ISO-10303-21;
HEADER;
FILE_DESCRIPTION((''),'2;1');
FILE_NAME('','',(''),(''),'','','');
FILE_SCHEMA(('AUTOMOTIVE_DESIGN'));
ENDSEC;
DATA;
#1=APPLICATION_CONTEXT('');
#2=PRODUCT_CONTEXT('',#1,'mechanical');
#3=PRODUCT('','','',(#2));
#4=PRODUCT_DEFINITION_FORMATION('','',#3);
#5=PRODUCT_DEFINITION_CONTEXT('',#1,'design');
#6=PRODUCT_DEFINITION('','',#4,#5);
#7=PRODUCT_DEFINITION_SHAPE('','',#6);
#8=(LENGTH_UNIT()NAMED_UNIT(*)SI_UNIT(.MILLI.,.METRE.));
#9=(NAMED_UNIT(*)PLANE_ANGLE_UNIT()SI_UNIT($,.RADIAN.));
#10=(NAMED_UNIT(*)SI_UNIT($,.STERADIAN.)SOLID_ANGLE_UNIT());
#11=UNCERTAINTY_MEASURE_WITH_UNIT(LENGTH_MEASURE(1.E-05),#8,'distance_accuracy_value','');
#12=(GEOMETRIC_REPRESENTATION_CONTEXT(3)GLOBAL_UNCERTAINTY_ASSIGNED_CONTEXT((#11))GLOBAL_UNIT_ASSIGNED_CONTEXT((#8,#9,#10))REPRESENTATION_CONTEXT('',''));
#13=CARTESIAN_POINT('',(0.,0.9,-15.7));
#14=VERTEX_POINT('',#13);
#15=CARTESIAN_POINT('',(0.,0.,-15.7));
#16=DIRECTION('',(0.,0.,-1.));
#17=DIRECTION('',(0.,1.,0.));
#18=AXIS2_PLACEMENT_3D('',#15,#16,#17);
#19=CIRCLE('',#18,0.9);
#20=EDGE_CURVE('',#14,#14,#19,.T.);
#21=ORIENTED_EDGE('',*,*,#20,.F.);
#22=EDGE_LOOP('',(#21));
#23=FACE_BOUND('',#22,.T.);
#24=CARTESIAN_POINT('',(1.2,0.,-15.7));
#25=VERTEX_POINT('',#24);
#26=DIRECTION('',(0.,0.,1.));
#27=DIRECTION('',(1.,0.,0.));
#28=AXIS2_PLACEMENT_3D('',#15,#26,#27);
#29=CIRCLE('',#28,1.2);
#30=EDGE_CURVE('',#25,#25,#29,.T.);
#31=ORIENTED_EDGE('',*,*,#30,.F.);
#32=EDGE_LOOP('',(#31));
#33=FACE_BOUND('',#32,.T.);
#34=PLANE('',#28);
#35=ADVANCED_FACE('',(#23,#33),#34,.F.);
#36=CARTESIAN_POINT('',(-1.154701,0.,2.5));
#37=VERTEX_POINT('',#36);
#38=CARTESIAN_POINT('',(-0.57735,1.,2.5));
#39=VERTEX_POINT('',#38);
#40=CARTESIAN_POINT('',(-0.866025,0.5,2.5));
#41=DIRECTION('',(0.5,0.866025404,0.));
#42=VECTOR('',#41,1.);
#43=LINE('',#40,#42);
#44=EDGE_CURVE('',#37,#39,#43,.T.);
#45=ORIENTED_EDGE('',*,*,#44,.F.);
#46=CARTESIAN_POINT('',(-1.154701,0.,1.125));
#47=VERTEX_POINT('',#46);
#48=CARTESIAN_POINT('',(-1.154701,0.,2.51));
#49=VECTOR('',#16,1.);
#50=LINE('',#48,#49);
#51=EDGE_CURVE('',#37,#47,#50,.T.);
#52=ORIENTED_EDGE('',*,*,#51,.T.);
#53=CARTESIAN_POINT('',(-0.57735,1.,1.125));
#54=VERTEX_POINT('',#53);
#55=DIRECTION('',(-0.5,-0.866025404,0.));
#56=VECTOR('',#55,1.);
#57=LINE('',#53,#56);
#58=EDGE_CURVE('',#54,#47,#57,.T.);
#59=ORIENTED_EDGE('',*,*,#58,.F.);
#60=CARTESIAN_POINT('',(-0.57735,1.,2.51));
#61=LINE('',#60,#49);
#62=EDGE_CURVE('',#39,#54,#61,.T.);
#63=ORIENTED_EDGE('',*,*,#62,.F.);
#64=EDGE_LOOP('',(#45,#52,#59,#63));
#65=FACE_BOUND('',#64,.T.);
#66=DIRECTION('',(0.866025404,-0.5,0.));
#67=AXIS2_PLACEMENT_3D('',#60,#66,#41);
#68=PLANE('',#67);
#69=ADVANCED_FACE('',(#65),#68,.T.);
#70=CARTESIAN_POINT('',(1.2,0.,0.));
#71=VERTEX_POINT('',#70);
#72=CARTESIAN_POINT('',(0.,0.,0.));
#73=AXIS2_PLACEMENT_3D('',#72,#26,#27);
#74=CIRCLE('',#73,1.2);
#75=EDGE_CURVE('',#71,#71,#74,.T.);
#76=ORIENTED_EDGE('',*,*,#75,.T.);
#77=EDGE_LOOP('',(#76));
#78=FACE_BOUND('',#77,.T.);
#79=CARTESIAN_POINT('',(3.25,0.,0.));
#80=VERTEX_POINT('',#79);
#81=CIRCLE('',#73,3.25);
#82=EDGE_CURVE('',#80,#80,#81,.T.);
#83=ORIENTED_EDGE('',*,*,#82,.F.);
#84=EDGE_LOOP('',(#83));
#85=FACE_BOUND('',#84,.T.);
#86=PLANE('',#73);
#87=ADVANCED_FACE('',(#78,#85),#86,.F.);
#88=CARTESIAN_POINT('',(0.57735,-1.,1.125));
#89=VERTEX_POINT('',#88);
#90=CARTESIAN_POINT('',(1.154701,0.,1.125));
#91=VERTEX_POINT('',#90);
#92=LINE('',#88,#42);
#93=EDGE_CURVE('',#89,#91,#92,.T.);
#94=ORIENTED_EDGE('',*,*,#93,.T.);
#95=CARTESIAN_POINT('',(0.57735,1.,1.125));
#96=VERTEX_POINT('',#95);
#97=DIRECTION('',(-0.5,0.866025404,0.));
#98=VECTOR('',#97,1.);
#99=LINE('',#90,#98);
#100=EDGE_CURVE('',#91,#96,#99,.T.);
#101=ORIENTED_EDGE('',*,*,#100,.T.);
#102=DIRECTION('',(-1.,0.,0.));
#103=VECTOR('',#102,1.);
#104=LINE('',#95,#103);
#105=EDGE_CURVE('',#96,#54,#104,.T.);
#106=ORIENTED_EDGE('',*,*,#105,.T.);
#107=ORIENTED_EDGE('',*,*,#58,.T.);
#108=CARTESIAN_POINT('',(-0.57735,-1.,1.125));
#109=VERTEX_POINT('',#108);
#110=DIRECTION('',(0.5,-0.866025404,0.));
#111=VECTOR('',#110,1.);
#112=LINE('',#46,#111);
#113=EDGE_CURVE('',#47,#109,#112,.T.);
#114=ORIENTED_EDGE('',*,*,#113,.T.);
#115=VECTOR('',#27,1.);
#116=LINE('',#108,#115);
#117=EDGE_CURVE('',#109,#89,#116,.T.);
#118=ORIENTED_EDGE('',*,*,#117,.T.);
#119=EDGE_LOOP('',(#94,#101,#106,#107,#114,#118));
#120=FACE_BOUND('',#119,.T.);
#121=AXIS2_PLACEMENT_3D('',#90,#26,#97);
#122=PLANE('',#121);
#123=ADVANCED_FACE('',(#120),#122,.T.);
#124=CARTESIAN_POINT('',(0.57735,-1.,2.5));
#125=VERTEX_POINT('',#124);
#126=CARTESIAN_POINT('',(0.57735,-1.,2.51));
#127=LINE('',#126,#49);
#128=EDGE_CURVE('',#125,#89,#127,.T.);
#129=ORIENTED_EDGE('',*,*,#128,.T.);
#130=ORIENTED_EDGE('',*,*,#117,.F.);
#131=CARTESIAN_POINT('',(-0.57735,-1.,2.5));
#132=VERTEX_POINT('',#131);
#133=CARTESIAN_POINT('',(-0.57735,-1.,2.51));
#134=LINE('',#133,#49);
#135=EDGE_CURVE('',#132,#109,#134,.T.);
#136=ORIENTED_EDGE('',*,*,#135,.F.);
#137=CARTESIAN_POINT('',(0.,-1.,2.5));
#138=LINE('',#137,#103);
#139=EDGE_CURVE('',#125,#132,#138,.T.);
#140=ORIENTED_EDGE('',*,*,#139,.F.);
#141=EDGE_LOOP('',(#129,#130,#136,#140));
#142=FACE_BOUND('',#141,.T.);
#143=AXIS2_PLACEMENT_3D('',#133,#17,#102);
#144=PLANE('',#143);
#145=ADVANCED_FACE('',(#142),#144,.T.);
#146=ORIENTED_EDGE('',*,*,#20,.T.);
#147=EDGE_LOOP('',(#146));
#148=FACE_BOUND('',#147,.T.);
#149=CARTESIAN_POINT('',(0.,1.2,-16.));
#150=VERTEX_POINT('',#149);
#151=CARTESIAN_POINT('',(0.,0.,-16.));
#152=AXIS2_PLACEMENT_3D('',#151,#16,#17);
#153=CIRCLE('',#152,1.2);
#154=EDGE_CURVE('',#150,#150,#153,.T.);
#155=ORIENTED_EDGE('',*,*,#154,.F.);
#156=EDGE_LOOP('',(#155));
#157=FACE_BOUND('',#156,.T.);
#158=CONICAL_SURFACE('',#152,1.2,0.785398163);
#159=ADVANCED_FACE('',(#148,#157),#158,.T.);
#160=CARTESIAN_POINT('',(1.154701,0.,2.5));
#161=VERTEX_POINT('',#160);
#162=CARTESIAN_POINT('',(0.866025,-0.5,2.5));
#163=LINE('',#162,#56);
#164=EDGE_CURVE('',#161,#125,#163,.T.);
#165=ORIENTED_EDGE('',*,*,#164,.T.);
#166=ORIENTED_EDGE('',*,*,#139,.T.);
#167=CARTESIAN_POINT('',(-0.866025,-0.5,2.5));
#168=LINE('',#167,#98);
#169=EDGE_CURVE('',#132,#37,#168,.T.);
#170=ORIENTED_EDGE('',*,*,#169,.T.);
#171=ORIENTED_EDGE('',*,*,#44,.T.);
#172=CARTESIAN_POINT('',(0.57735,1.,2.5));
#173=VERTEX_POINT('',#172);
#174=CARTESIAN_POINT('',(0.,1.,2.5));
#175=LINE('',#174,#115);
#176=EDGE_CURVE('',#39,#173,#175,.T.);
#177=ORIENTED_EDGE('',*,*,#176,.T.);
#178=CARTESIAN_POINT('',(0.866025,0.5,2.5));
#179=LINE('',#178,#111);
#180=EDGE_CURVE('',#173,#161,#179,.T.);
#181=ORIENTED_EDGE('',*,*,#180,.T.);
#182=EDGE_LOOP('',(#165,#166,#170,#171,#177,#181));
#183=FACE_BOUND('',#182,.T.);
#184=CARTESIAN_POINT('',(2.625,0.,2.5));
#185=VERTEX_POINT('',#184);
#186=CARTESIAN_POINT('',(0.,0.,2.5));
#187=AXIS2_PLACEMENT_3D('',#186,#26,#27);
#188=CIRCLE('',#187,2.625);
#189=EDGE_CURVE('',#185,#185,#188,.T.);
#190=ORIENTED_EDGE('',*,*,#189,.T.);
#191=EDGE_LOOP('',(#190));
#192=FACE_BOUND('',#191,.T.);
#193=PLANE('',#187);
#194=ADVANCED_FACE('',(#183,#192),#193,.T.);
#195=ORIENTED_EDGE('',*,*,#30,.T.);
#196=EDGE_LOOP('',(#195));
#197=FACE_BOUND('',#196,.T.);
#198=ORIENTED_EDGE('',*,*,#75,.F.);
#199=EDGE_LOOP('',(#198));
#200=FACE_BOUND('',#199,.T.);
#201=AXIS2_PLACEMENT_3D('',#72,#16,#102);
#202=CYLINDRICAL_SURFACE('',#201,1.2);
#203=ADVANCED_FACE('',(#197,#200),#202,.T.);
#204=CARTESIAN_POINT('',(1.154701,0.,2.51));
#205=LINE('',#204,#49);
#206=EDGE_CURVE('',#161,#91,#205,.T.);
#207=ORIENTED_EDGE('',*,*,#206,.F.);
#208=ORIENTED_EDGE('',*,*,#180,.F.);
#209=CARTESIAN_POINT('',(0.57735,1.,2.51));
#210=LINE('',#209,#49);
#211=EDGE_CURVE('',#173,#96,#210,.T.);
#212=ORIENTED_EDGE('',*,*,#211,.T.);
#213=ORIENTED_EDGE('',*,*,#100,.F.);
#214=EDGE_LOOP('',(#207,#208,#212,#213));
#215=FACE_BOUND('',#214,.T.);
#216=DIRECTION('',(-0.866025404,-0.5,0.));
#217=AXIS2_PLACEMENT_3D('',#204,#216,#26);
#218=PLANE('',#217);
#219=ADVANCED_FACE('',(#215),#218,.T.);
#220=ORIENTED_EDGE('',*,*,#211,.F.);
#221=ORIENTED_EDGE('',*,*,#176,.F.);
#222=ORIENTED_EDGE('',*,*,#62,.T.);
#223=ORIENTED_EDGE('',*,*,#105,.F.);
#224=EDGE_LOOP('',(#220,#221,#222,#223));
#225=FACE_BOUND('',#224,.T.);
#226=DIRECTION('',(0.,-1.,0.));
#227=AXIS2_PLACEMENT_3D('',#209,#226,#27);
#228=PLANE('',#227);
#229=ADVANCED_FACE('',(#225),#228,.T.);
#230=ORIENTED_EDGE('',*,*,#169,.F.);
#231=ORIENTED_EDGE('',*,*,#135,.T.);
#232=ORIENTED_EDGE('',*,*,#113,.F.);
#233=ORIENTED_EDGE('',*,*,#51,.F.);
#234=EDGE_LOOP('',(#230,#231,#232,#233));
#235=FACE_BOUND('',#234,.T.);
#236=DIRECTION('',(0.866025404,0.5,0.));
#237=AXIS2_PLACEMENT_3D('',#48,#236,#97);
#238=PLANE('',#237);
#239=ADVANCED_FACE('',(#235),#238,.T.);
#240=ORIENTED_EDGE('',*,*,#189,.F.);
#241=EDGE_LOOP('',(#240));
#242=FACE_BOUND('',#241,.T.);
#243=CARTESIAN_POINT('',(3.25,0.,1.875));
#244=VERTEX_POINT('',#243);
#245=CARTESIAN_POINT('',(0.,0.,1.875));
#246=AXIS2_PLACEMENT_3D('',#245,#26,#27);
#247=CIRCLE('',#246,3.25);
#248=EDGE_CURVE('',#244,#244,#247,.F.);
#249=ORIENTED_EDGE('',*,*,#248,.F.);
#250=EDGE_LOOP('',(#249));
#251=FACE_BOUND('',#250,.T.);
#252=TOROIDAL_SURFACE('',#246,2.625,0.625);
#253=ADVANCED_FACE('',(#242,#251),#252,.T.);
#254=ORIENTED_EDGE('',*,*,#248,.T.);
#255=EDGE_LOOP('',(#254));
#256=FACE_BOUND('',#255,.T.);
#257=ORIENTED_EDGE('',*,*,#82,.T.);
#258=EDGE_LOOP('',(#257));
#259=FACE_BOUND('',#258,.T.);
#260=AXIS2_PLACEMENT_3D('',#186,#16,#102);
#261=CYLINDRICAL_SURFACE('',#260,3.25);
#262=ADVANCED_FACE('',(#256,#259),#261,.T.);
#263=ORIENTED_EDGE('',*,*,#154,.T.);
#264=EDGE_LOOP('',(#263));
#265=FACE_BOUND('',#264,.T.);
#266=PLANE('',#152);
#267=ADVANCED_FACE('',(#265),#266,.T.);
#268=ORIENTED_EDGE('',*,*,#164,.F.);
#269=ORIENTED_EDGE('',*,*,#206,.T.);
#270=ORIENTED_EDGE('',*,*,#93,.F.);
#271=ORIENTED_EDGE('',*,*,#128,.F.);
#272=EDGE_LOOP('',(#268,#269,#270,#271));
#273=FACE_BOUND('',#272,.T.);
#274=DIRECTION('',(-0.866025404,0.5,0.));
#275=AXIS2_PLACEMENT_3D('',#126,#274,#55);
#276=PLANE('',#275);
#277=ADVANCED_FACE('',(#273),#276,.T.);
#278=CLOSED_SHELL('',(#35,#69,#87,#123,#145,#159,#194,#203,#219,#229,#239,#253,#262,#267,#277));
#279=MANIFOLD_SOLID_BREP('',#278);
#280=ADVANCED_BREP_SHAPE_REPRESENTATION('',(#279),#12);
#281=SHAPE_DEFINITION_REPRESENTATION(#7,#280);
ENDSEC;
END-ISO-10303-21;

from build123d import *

# Parameters (mm, degrees)
F_0060_CYLINDER_SKETCH_R    = 3.25
F_0060_CYLINDER_DEPTH       = 2.5
F_0061_FILLET_R             = 0.625
F_0062_EXTRUDE_DEPTH        = 1.385
F_0062_EXTRUDE_ROTATE_ANGLE = 120
F_0065_CYLINDER_SKETCH_R    = 1.2
F_0065_CYLINDER_DEPTH       = 15.7
F_0066_CONE_ROTATE_ANGLE    = 90


with BuildPart() as part:
    # 0060_cylinder_Sketch → 0060_cylinder (new body)
    with BuildSketch(Plane.XY):
        Circle(F_0060_CYLINDER_SKETCH_R)
    extrude(amount=F_0060_CYLINDER_DEPTH)

    # 0061_fillet
    f_0061_fillet_edges = [part.edges().sort_by_distance(p)[0] for p in [
        (-3.25, 0, 2.5),
    ]]
    fillet(f_0061_fillet_edges, radius=F_0061_FILLET_R)


with BuildPart() as body_2:
    # 0062_extrude_Sketch → 0062_extrude (new body)
    with BuildSketch(Plane.XY):
        Polygon((0, 0), (1.154700538, 0), (1.732050808, 1), (1.154700538, 2), (0, 2), (-0.577350269, 1), align=None)
    extrude(amount=F_0062_EXTRUDE_DEPTH)


with BuildPart() as body_2_1:
    # 0062_extrude_Rotate: read off the stored shape, not the designer's step
    # 0062_extrude_Rotate: moved
    add(body_2.part.rotate(Axis((0, 0, 0), (0, 0, 1)), F_0062_EXTRUDE_ROTATE_ANGLE))


with BuildPart() as body_2_2:
    # 0062_extrude_Translate: moved
    add(body_2_1.part.moved(Location((1.154700538, 0, 1.125))))


with BuildPart() as part_1:
    add(part.part)

    # 0064_sub: cut body 2
    add(body_2_2.part, mode=Mode.SUBTRACT)


with BuildPart() as body_2_2_1:
    # 0065_cylinder_Sketch → 0065_cylinder (new body)
    with BuildSketch(Plane.XY):
        Circle(F_0065_CYLINDER_SKETCH_R)
    extrude(amount=F_0065_CYLINDER_DEPTH)


with BuildPart() as body_2_2_2:
    # 0065_cylinder_Translate: moved
    add(body_2_2_1.part.moved(Location((0, 0, -15.7))))


with BuildPart() as body_3:
    # 0066_cone_Sketch → 0066_cone (revolve)
    with BuildSketch(Plane.XY, mode=Mode.PRIVATE) as f_0066_cone_sk:
        Polygon((0, 0), (1.2, 0), (0.9, 0.3), (0, 0.3), align=None)
    revolve(f_0066_cone_sk.sketch.rotate(Axis((0, -100, 0), (0, 1, 0)), 90), axis=Axis((0, -100, 0), (0, 1, 0)))


with BuildPart() as body_3_1:
    # 0066_cone_Rotate: moved
    add(body_3.part.rotate(Axis((0, 0, 0), (1, 0, 0)), F_0066_CONE_ROTATE_ANGLE))


with BuildPart() as body_3_2:
    # 0066_cone_Translate: moved
    add(body_3_1.part.moved(Location((0, 0, -16))))


with BuildPart() as body_2_2_3:
    add(body_2_2_2.part)

    # 0068_add: union body 3
    add(body_3_2.part)


with BuildPart() as part_2:
    add(part_1.part)

    # 0069_add: union body 2 2
    add(body_2_2_3.part)


solid = part_2.part
